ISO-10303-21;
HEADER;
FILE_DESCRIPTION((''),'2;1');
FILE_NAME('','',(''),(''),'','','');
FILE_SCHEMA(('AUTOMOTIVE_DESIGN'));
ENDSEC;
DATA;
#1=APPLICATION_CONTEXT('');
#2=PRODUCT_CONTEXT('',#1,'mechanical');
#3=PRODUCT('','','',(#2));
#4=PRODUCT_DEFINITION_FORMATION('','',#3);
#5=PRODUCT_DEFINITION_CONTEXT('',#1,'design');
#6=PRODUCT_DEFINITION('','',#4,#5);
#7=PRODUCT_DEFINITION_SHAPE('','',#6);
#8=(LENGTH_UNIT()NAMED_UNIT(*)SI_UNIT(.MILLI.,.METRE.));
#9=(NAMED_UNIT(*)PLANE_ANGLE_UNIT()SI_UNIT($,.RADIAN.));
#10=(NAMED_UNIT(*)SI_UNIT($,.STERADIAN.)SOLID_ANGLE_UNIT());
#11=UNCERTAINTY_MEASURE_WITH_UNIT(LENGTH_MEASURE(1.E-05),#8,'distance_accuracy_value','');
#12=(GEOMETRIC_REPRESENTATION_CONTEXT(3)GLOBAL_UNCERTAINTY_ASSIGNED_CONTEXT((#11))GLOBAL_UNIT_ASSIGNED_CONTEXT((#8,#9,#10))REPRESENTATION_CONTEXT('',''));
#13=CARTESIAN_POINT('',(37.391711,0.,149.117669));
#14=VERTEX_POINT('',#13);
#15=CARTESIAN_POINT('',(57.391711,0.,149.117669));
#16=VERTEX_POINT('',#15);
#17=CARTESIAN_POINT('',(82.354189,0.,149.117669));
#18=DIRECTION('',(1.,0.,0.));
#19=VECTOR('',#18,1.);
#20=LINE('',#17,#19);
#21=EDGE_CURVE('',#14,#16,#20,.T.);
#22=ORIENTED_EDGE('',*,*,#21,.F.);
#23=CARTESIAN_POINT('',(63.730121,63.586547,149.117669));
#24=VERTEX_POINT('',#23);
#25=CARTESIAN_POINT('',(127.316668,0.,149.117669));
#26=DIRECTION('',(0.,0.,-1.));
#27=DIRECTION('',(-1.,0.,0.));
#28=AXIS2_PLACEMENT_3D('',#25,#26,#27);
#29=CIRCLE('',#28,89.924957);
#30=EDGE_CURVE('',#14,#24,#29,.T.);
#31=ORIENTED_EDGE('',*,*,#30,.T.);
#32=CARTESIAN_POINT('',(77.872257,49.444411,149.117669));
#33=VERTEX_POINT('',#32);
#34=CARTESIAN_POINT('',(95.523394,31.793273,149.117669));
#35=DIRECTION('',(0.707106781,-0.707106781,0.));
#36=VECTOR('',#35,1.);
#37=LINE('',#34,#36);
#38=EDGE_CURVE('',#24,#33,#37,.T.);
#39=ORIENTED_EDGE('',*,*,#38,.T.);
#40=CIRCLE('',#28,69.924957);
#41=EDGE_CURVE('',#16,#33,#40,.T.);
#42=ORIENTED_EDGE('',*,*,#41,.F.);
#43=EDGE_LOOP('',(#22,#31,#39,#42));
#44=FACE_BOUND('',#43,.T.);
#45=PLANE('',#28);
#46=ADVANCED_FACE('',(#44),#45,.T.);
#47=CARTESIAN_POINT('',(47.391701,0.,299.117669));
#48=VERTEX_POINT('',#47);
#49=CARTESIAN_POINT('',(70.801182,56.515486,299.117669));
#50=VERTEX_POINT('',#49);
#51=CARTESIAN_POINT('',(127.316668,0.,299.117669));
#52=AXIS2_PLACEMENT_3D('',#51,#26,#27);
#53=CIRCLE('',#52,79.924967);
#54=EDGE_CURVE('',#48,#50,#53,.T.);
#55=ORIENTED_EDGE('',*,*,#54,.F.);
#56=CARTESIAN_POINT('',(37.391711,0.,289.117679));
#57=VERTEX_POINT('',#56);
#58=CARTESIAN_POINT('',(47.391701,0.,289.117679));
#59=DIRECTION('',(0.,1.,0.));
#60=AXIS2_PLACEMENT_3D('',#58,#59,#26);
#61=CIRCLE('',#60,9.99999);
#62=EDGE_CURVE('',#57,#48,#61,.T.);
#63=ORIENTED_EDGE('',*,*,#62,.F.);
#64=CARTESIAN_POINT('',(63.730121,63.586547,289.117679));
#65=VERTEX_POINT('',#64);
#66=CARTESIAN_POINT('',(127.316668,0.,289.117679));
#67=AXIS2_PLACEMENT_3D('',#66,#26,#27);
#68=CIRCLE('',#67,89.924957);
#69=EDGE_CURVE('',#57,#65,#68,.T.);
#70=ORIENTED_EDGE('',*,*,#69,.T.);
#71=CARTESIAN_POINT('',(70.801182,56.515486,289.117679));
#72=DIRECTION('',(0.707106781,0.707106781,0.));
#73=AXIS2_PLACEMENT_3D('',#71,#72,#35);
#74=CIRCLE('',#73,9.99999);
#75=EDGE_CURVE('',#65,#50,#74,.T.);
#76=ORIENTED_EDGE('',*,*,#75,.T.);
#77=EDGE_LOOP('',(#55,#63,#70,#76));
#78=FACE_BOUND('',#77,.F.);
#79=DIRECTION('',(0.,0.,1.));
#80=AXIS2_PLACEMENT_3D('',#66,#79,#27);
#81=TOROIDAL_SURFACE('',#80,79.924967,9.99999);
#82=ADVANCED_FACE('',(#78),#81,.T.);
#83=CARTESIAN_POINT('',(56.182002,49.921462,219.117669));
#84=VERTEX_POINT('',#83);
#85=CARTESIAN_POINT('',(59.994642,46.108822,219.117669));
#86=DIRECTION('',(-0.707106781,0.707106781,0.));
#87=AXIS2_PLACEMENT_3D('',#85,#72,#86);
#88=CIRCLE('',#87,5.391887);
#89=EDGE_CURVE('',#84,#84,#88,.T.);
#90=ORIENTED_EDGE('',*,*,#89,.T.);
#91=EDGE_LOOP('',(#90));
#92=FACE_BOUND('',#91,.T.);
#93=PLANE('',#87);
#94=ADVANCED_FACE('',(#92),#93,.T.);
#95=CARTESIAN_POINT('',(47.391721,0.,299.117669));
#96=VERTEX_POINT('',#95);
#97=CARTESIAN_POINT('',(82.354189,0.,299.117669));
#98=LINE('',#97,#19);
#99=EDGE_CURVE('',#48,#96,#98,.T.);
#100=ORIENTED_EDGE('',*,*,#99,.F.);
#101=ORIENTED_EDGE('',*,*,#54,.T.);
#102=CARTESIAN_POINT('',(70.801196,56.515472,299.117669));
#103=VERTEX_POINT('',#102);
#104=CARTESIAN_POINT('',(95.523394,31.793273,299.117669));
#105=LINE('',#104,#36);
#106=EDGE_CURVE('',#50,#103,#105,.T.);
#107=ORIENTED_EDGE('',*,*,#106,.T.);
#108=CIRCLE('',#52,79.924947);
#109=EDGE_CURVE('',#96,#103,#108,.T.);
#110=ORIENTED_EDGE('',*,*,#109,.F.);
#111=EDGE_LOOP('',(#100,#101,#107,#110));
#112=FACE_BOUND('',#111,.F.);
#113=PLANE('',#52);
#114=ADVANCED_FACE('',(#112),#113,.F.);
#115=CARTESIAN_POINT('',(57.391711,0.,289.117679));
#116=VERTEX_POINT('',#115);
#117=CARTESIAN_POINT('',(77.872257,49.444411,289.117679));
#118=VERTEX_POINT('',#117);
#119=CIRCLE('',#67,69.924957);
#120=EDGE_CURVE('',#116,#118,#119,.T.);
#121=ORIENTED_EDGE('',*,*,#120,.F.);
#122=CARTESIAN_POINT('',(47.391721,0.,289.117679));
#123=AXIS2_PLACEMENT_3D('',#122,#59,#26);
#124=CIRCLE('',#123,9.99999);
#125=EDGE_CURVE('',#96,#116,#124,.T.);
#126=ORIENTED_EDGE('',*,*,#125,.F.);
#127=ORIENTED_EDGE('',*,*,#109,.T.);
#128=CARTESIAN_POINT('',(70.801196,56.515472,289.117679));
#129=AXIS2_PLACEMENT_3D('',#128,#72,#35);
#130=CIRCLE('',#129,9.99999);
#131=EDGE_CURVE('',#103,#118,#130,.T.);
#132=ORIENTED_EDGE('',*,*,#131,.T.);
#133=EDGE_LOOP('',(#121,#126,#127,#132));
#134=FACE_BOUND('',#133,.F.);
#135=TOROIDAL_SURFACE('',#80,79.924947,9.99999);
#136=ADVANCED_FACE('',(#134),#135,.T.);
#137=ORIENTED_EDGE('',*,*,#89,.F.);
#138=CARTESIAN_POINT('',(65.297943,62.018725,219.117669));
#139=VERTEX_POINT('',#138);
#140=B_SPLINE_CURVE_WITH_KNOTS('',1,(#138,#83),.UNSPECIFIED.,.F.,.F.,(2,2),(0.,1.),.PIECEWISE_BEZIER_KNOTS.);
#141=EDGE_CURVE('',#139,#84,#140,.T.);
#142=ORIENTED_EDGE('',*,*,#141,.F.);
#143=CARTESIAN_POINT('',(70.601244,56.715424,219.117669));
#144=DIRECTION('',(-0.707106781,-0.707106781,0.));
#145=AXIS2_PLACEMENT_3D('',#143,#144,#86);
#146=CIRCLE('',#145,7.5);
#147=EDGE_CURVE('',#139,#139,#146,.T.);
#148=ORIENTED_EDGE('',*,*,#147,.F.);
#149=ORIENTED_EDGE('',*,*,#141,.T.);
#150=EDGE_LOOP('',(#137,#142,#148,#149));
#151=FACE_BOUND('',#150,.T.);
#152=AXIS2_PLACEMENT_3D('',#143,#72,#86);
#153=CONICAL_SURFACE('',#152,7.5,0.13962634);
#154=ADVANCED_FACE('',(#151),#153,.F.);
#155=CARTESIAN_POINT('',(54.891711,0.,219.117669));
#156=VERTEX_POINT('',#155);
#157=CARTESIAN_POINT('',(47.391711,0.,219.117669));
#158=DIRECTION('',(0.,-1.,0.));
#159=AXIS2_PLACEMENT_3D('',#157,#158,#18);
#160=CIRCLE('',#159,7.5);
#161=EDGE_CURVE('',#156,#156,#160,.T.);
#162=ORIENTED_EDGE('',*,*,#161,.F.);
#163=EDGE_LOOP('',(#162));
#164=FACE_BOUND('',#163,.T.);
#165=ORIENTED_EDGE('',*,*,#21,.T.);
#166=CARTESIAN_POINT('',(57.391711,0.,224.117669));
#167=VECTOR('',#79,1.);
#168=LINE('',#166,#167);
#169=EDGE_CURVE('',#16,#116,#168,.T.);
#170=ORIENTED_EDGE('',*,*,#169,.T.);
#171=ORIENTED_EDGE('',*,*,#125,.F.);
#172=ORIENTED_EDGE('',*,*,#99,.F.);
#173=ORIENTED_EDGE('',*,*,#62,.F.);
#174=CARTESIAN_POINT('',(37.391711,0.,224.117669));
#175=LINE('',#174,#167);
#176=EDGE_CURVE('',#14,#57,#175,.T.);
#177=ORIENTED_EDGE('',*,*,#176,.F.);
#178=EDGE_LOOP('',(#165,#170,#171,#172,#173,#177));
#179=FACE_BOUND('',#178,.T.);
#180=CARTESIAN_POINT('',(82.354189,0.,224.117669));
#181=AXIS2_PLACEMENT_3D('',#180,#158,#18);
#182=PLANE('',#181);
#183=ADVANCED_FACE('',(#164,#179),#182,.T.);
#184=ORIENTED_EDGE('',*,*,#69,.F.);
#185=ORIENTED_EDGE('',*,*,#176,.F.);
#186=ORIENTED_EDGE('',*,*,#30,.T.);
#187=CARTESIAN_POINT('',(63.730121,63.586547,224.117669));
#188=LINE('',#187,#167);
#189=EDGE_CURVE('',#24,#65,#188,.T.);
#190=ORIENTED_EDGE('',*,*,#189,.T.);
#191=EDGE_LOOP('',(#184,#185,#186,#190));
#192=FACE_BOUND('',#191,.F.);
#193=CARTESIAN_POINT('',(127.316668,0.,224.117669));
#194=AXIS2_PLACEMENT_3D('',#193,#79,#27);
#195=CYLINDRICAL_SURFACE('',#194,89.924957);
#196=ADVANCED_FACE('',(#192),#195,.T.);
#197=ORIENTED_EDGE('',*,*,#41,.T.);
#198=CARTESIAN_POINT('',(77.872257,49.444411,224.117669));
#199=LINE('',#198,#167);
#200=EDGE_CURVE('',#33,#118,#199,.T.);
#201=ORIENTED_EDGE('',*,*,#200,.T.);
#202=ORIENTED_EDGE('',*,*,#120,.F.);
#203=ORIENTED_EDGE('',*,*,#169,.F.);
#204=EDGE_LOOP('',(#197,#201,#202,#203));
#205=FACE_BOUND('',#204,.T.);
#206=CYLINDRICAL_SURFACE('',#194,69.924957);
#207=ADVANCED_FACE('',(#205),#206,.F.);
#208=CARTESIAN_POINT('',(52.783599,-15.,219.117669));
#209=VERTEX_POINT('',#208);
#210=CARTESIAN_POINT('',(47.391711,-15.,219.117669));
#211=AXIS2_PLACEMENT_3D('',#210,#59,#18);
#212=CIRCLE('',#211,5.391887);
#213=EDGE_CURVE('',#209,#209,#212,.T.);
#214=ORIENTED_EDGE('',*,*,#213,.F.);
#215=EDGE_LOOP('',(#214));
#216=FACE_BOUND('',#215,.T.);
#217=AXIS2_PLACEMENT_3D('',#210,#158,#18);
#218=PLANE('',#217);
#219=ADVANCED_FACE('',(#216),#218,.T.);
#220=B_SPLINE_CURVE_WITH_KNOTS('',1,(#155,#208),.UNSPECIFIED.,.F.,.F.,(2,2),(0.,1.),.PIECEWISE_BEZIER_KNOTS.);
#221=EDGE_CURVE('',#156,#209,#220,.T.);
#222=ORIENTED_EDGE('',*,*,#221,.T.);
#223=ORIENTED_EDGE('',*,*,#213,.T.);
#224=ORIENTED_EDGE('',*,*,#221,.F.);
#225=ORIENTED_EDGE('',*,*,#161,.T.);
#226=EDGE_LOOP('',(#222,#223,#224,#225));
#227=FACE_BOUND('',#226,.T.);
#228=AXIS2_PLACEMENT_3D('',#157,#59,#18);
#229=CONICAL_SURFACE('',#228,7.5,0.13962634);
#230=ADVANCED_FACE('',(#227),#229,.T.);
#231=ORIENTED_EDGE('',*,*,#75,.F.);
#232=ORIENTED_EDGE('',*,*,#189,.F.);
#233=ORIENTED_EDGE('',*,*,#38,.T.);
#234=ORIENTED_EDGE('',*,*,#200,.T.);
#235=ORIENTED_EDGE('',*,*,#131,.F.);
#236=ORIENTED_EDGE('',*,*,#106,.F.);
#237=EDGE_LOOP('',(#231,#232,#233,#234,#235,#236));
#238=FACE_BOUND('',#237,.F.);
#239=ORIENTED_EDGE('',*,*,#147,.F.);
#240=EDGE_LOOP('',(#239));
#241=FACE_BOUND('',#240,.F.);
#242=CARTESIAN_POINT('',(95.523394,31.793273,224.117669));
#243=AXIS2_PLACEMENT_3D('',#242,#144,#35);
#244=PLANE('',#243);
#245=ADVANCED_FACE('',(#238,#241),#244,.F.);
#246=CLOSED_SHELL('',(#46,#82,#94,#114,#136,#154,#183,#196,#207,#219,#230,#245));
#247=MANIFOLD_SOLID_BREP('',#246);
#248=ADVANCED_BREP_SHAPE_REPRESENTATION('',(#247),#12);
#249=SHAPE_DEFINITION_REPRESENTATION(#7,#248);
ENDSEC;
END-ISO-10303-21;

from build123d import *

# Parameters (mm, degrees)
F0_W     = 89.9249566834
F0_H     = 150
F1_ANGLE = 45
F2_T     = -20
F3_R     = 7.5
F4_DEPTH = 15
F4_TAPER = 8
F5_R     = 7.5
F6_DEPTH = 15
F6_TAPER = 8
F7_R     = 9.99999


# Not quite as in the source:
# - a fillet or chamfer is up to 0.001 mm smaller than in the source, because OpenCascade refuses the exact size
# - a feature names something its author has since deleted; it is built from what else it names


with BuildPart() as f1:
    # F0 (on Front) → F1 (revolve)
    with BuildSketch(Plane.XZ):
        with Locations((82.3541893682, 224.1176688539)):
            Rectangle(F0_W, F0_H)
    revolve(axis=Axis((127.3166677099, 0, 224.1176688539), (0, 0, -1)), revolution_arc=F1_ANGLE)

    # F2
    f2_openings = [f1.faces().sort_by_distance(p)[0] for p in [
        (82.354189, 0, 224.117669),
        (95.523394, 31.793273, 224.117669),
        (73.342731, 22.356737, 149.117669),
        (73.342731, 22.356737, 299.117669),
    ]]
    offset(amount=F2_T, openings=f2_openings)

    # F3 (on face) → F4 (join)
    with BuildSketch(Plane.XZ):
        with Locations((47.3917110264, 219.1176688539)):
            Circle(F3_R)
    extrude(amount=F4_DEPTH, taper=F4_TAPER)

    # F5 (on face) → F6 (cut)
    with BuildSketch(Plane(origin=(63.6583338549, 63.6583338549, 0), x_dir=(-0.7071067812, 0.7071067812, 0), z_dir=(0.7071067812, 0.7071067812, 0))):
        with Locations((-9.8187575006, 219.1176688539)):
            Circle(F5_R)
    extrude(amount=-F6_DEPTH, taper=F6_TAPER, mode=Mode.SUBTRACT)

    # F7 (radius 10 in the source; OpenCascade refuses exactly that, so slightly less here)
    f7_edges = [f1.edges().sort_by_distance(p)[0] for p in [
        (44.236841, 34.412791, 299.117669),
        (62.714431, 26.759122, 299.117669),
    ]]
    fillet(f7_edges, radius=F7_R)


solid = f1.part
